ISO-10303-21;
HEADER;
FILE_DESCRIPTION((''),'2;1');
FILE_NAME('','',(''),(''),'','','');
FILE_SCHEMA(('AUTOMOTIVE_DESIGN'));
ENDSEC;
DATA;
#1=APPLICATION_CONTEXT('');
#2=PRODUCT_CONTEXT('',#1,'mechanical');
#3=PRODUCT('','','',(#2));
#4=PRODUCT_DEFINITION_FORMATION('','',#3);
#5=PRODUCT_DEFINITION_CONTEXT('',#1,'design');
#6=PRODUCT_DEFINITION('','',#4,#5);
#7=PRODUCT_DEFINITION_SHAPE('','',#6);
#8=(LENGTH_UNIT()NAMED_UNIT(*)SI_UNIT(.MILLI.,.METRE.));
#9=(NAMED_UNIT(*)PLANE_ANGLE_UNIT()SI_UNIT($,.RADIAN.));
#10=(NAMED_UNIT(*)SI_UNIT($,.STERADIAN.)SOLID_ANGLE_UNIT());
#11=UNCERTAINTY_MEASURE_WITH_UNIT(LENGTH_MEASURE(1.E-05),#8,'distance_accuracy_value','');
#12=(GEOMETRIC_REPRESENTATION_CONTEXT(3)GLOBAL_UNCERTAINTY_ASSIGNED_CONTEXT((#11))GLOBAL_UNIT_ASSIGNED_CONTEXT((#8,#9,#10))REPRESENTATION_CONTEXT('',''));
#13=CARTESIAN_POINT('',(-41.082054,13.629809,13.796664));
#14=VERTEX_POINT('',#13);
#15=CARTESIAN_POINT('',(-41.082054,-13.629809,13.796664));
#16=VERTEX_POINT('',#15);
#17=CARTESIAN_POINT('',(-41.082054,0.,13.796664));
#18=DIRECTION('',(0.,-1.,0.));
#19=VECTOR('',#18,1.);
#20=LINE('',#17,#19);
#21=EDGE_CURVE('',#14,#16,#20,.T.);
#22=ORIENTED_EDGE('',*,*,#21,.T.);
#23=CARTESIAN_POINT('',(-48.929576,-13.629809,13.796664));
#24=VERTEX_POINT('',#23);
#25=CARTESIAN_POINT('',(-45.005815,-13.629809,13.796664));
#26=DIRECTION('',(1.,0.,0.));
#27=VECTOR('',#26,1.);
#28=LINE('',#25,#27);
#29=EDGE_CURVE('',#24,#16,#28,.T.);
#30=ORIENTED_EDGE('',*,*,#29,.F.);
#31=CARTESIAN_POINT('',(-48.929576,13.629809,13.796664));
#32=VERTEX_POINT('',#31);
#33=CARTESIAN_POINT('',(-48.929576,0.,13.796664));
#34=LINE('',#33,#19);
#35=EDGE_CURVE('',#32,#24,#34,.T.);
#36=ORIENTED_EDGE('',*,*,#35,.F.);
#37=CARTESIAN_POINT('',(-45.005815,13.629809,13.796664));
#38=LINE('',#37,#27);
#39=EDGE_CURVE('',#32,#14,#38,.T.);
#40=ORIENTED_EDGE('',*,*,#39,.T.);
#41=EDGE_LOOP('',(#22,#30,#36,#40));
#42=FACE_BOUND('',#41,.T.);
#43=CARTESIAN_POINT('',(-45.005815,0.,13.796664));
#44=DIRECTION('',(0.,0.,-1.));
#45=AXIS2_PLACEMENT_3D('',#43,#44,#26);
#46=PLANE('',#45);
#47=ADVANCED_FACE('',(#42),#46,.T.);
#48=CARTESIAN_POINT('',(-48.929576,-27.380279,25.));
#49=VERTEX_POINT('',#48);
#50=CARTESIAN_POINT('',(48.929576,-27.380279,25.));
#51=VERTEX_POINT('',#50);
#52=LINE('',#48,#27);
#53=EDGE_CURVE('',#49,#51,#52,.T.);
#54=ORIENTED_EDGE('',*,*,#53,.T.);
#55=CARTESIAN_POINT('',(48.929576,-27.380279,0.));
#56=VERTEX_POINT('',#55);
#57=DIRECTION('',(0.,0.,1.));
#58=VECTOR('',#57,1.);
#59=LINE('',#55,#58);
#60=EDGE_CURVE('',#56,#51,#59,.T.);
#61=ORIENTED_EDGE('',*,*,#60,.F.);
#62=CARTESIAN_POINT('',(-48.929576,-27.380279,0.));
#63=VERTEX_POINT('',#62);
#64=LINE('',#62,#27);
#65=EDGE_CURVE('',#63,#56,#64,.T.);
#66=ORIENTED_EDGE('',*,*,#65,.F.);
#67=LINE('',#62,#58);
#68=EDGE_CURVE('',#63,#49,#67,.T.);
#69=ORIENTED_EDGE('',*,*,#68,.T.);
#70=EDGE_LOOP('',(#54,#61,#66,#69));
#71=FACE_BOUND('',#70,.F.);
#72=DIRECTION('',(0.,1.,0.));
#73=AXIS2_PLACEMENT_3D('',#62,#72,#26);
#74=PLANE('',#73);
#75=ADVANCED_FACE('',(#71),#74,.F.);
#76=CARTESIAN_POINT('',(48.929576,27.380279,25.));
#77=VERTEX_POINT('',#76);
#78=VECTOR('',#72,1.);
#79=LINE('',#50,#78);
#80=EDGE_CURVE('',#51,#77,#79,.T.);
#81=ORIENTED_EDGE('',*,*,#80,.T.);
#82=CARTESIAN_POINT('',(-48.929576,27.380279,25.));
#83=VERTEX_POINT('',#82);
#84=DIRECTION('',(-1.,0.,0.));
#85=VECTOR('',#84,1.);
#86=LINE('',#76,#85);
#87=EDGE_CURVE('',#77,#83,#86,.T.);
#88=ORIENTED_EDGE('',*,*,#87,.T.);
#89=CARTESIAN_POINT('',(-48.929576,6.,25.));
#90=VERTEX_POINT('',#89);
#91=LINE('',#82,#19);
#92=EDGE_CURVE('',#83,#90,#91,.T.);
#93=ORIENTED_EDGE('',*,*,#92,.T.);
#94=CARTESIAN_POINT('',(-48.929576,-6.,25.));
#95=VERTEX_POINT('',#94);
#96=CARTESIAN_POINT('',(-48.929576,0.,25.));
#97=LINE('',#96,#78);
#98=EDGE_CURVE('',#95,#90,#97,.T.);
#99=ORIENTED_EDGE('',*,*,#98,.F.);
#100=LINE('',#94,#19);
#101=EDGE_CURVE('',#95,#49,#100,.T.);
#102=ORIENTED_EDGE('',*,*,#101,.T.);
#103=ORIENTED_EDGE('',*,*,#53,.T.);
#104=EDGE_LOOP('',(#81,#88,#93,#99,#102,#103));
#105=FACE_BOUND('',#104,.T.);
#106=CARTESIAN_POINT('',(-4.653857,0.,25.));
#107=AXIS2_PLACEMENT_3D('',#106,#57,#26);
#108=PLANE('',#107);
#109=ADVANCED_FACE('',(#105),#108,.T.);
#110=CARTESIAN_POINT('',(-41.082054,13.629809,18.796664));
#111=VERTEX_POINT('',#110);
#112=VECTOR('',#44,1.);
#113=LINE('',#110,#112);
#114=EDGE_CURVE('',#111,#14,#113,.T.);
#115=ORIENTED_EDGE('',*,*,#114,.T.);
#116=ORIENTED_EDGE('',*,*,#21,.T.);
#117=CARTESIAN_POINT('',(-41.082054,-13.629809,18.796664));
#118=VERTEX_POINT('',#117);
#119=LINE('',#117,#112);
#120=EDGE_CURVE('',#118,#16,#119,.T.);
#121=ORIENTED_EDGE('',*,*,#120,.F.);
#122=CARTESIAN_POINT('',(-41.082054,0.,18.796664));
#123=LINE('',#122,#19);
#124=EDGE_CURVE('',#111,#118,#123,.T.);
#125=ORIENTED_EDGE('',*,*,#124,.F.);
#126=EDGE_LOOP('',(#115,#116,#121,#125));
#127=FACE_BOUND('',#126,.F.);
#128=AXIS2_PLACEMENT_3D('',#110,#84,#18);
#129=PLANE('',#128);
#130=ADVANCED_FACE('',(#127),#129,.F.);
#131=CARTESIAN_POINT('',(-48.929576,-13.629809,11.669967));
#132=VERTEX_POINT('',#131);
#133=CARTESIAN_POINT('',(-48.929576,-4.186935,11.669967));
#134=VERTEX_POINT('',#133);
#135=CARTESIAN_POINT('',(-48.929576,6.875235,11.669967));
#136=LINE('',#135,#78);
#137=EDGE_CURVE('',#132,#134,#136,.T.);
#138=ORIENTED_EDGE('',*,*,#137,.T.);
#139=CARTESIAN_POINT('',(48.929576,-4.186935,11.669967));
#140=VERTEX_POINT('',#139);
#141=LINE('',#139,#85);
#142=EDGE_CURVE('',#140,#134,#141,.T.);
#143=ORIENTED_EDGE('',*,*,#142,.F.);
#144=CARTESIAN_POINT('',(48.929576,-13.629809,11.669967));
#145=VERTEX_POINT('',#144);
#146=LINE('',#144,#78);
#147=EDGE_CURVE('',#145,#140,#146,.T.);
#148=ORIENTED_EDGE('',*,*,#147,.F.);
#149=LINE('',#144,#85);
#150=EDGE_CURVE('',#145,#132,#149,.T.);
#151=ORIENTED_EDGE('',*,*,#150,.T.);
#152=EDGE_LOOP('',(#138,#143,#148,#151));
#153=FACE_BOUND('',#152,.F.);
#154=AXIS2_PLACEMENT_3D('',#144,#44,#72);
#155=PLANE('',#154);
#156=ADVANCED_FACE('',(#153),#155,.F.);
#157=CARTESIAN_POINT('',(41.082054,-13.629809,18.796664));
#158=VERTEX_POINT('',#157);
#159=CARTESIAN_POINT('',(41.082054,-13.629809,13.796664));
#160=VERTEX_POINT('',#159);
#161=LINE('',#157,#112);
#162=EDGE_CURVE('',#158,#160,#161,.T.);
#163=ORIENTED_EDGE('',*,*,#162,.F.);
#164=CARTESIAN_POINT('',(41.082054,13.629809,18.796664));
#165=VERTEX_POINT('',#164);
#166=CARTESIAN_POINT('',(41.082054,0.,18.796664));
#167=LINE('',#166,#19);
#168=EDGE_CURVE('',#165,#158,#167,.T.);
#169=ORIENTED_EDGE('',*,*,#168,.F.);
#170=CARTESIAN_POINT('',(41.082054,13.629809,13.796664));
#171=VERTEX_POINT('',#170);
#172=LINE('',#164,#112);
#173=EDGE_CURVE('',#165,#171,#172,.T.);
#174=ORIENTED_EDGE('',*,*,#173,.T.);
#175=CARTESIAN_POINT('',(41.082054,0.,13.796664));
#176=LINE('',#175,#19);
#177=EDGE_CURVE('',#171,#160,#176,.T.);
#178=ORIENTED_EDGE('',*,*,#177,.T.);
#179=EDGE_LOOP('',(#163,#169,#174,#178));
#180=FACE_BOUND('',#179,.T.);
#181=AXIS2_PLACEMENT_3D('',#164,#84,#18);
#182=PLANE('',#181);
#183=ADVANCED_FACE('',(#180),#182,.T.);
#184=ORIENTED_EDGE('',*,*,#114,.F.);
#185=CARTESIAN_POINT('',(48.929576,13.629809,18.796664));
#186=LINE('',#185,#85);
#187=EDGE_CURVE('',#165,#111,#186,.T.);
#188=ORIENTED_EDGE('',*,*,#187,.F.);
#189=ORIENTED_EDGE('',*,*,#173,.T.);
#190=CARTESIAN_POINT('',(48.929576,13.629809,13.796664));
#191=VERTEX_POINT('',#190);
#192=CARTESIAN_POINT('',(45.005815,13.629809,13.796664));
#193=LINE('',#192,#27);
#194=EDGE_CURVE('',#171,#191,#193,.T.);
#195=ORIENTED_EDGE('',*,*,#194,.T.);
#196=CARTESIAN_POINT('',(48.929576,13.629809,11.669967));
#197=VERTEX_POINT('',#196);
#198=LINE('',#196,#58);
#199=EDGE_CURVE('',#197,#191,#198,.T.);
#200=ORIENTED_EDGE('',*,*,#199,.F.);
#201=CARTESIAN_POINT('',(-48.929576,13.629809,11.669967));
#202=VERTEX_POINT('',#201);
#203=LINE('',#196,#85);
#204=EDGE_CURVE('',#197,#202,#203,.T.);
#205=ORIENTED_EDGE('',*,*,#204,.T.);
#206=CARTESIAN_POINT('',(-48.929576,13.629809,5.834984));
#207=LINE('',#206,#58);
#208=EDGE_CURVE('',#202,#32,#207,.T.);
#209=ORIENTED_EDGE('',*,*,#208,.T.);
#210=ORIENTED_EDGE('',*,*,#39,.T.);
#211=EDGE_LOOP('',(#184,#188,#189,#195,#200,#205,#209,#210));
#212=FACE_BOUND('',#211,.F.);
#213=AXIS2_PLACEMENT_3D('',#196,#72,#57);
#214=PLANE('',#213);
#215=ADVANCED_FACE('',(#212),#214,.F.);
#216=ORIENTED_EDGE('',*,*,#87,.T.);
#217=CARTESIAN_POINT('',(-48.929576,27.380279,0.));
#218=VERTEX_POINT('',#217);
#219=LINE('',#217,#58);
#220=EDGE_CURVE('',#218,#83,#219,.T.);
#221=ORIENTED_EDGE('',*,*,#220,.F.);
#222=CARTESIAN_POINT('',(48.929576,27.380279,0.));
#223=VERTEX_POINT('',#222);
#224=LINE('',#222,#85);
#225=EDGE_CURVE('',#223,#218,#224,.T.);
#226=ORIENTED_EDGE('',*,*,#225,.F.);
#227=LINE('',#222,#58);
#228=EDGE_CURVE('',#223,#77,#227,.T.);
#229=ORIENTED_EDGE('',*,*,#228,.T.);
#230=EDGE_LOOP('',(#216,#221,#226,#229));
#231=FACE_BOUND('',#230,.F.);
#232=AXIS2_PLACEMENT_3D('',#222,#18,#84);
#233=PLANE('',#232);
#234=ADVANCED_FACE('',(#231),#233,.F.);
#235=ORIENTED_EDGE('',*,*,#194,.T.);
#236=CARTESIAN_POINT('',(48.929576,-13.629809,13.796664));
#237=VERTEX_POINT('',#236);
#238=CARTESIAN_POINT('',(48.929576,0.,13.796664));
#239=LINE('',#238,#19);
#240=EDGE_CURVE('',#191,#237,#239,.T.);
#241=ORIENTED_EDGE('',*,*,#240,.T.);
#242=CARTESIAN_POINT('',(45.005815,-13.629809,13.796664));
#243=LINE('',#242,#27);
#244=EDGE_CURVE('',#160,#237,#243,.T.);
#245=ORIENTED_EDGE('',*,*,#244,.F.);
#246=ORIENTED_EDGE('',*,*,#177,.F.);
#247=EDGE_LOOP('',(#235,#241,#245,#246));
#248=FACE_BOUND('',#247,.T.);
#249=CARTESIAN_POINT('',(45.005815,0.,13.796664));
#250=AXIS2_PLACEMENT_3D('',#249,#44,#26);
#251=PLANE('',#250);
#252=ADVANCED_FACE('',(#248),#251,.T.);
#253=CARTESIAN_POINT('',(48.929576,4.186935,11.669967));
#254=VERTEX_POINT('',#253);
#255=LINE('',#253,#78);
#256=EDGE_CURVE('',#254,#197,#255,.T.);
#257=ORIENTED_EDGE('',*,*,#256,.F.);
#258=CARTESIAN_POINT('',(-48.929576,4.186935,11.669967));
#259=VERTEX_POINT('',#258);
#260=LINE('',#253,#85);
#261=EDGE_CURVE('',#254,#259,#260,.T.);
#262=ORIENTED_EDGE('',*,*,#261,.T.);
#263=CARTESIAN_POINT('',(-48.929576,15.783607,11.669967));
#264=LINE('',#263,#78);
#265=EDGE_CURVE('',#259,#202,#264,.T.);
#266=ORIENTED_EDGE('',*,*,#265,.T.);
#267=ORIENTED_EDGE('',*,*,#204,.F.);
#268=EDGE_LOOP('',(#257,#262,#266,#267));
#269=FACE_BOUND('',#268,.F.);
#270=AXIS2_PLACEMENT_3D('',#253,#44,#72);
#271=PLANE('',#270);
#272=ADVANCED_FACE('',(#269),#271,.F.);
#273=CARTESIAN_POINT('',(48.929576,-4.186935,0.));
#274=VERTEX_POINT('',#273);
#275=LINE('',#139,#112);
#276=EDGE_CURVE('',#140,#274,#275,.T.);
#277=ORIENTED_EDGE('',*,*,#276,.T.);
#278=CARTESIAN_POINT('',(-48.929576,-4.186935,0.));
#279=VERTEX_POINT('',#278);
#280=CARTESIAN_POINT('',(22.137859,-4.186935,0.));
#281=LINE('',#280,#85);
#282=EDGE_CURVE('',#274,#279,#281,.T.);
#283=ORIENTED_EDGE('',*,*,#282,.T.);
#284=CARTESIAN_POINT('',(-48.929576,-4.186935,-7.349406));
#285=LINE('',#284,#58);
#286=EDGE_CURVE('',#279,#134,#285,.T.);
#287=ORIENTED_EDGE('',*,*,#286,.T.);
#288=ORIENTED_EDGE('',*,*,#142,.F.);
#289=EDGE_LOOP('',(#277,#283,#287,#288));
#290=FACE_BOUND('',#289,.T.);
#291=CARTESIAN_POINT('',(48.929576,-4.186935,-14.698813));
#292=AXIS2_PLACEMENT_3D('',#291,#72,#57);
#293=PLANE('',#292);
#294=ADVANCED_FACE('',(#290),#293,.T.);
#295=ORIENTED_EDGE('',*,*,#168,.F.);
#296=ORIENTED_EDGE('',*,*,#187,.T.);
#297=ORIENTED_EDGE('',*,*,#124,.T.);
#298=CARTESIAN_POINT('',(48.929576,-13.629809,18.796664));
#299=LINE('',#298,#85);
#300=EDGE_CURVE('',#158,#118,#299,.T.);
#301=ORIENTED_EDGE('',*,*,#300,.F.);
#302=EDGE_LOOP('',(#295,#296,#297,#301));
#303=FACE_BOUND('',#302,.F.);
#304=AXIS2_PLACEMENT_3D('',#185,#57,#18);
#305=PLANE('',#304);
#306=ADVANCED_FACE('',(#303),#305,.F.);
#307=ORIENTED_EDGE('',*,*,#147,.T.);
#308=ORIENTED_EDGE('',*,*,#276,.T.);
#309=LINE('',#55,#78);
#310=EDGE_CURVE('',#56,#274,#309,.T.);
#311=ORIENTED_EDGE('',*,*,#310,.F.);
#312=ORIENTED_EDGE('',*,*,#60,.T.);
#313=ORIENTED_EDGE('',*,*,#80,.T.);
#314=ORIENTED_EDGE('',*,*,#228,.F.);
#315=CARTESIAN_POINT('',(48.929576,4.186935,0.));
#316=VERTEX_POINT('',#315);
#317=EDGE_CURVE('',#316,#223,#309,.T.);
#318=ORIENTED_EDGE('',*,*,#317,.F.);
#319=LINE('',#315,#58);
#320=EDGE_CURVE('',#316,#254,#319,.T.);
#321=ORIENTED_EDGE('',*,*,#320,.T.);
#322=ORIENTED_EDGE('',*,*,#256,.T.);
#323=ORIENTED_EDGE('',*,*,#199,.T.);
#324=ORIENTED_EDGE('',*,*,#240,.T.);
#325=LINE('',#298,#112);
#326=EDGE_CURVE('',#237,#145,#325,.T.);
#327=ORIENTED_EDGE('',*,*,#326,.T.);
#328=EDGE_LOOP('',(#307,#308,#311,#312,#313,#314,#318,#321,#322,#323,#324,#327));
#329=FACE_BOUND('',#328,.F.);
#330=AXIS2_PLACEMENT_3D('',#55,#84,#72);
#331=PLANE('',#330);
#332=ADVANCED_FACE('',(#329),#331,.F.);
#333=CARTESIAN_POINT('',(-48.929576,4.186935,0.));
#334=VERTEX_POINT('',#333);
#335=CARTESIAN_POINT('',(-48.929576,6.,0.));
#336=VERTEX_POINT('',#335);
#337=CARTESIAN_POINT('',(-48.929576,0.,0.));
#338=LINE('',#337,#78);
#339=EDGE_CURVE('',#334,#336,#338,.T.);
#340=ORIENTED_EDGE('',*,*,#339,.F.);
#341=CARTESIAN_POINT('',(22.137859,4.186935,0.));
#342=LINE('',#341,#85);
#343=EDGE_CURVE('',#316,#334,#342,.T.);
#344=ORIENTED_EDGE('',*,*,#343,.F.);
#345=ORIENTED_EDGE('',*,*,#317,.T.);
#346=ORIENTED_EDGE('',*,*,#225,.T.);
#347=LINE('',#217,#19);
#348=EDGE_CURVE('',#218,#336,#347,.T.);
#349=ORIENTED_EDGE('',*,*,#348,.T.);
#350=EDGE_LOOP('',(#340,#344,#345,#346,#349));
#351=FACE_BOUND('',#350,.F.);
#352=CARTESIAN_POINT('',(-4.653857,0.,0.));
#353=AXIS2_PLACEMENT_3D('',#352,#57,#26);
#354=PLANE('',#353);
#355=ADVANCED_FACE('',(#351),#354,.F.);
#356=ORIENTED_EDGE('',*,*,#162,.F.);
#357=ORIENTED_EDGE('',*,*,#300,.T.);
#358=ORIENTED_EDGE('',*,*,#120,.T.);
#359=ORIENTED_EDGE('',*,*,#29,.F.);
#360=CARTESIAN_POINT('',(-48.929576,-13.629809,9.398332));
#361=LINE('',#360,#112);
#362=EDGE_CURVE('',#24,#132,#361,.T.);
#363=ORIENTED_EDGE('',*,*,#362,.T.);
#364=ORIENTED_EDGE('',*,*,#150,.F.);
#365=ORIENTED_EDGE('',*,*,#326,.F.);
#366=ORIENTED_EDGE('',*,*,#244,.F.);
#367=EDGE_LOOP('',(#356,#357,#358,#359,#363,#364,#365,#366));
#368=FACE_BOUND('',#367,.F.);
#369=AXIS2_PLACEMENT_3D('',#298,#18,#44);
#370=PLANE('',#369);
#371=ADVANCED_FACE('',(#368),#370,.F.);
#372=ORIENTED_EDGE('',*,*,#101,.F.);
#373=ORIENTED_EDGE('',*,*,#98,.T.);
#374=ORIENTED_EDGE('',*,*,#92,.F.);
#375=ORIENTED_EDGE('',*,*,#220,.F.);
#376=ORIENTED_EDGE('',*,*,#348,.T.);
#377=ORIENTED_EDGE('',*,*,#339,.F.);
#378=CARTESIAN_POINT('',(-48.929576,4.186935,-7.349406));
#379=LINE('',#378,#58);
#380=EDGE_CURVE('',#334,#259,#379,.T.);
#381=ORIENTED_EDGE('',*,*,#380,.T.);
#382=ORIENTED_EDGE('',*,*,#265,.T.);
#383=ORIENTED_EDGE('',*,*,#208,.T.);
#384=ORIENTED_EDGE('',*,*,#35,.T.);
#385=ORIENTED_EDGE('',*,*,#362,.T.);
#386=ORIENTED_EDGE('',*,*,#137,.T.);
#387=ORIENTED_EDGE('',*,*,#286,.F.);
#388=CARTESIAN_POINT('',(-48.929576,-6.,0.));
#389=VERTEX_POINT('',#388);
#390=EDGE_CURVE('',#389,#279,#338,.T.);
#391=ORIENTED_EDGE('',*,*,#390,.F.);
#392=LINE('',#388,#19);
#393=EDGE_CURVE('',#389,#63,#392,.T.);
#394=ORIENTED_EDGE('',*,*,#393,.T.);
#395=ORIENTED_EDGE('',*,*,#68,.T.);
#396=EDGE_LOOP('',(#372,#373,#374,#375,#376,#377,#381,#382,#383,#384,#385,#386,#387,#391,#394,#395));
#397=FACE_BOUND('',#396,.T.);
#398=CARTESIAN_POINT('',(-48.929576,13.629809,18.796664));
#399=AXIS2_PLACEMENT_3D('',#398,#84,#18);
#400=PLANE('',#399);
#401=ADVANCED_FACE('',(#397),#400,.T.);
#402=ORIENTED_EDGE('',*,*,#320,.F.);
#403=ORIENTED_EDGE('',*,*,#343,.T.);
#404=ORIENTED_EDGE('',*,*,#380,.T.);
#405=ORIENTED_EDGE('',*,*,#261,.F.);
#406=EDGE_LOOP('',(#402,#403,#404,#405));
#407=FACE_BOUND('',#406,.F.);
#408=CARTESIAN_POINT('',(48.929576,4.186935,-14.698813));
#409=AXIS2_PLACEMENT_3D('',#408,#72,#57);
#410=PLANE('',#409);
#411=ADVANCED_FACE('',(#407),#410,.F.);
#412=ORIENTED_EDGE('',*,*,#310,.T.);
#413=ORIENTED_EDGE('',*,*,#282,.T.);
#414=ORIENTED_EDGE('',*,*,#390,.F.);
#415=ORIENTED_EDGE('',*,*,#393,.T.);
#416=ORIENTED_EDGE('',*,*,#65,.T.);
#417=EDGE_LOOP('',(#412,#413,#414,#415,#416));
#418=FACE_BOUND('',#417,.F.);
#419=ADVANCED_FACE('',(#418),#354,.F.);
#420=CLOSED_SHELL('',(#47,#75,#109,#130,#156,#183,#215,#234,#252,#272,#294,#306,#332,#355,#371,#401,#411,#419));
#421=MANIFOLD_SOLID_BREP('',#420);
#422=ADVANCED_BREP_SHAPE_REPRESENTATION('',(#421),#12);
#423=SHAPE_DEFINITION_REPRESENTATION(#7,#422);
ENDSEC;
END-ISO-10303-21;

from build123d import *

# Parameters (mm, degrees)
F0_W     = 31.6056316875
F0_H     = 12
F1_DEPTH = 25
F2_W     = 8.3738705143
F2_H     = 14.6988127381
F3_DEPTH = 166
F4_W     = 7.847521259
F4_H     = 27.2596180439
F5_DEPTH = 5


# Not quite as in the source:
# - an extrude ends at something that could not be found from the text; its depth is read off the source's solid


with BuildPart() as f1:
    # F0 (on Top) → F1 (new body)
    with BuildSketch(Plane.XY):
        Polygon((48.9295756356, -27.3802791548), (48.9295756356, 27.3802791548), (-48.9295756356, 27.3802791548), (-48.9295756356, 6), (-17.3239439482, 6), (-17.3239439482, -6), (-48.9295756356, -6), (-48.9295756356, -27.3802791548), align=None)
        with Locations((-33.1267597919, 0)):
            Rectangle(F0_W, F0_H)
    extrude(amount=F1_DEPTH)

    # F2 (on face) → F3 (cut, through all)
    with BuildSketch(Plane.YZ.offset(48.9295756356)):
        with Locations((0, -7.349406369)):
            Rectangle(F2_W, F2_H)
        Polygon((13.6298090219, 11.6699673235), (13.6298090219, 18.7966637313), (-13.6298090219, 18.7966637313), (-13.6298090219, 11.6699673235), (-4.1869352572, 11.6699673235), (-4.1869352572, 0), (4.1869352572, 0), (4.1869352572, 11.6699673235), align=None)
    extrude(amount=-F3_DEPTH, mode=Mode.SUBTRACT)

    # F4 (on face) → F5 (join)
    with BuildSketch(Plane(origin=(0, 0, 18.7966637313), x_dir=(1, 0, 0), z_dir=(0, 0, -1))):
        with Locations((-45.0058150061, 0)):
            Rectangle(F4_W, F4_H)
        with Locations((45.0058150061, 0)):
            Rectangle(F4_W, F4_H)
    extrude(amount=F5_DEPTH)


solid = f1.part
